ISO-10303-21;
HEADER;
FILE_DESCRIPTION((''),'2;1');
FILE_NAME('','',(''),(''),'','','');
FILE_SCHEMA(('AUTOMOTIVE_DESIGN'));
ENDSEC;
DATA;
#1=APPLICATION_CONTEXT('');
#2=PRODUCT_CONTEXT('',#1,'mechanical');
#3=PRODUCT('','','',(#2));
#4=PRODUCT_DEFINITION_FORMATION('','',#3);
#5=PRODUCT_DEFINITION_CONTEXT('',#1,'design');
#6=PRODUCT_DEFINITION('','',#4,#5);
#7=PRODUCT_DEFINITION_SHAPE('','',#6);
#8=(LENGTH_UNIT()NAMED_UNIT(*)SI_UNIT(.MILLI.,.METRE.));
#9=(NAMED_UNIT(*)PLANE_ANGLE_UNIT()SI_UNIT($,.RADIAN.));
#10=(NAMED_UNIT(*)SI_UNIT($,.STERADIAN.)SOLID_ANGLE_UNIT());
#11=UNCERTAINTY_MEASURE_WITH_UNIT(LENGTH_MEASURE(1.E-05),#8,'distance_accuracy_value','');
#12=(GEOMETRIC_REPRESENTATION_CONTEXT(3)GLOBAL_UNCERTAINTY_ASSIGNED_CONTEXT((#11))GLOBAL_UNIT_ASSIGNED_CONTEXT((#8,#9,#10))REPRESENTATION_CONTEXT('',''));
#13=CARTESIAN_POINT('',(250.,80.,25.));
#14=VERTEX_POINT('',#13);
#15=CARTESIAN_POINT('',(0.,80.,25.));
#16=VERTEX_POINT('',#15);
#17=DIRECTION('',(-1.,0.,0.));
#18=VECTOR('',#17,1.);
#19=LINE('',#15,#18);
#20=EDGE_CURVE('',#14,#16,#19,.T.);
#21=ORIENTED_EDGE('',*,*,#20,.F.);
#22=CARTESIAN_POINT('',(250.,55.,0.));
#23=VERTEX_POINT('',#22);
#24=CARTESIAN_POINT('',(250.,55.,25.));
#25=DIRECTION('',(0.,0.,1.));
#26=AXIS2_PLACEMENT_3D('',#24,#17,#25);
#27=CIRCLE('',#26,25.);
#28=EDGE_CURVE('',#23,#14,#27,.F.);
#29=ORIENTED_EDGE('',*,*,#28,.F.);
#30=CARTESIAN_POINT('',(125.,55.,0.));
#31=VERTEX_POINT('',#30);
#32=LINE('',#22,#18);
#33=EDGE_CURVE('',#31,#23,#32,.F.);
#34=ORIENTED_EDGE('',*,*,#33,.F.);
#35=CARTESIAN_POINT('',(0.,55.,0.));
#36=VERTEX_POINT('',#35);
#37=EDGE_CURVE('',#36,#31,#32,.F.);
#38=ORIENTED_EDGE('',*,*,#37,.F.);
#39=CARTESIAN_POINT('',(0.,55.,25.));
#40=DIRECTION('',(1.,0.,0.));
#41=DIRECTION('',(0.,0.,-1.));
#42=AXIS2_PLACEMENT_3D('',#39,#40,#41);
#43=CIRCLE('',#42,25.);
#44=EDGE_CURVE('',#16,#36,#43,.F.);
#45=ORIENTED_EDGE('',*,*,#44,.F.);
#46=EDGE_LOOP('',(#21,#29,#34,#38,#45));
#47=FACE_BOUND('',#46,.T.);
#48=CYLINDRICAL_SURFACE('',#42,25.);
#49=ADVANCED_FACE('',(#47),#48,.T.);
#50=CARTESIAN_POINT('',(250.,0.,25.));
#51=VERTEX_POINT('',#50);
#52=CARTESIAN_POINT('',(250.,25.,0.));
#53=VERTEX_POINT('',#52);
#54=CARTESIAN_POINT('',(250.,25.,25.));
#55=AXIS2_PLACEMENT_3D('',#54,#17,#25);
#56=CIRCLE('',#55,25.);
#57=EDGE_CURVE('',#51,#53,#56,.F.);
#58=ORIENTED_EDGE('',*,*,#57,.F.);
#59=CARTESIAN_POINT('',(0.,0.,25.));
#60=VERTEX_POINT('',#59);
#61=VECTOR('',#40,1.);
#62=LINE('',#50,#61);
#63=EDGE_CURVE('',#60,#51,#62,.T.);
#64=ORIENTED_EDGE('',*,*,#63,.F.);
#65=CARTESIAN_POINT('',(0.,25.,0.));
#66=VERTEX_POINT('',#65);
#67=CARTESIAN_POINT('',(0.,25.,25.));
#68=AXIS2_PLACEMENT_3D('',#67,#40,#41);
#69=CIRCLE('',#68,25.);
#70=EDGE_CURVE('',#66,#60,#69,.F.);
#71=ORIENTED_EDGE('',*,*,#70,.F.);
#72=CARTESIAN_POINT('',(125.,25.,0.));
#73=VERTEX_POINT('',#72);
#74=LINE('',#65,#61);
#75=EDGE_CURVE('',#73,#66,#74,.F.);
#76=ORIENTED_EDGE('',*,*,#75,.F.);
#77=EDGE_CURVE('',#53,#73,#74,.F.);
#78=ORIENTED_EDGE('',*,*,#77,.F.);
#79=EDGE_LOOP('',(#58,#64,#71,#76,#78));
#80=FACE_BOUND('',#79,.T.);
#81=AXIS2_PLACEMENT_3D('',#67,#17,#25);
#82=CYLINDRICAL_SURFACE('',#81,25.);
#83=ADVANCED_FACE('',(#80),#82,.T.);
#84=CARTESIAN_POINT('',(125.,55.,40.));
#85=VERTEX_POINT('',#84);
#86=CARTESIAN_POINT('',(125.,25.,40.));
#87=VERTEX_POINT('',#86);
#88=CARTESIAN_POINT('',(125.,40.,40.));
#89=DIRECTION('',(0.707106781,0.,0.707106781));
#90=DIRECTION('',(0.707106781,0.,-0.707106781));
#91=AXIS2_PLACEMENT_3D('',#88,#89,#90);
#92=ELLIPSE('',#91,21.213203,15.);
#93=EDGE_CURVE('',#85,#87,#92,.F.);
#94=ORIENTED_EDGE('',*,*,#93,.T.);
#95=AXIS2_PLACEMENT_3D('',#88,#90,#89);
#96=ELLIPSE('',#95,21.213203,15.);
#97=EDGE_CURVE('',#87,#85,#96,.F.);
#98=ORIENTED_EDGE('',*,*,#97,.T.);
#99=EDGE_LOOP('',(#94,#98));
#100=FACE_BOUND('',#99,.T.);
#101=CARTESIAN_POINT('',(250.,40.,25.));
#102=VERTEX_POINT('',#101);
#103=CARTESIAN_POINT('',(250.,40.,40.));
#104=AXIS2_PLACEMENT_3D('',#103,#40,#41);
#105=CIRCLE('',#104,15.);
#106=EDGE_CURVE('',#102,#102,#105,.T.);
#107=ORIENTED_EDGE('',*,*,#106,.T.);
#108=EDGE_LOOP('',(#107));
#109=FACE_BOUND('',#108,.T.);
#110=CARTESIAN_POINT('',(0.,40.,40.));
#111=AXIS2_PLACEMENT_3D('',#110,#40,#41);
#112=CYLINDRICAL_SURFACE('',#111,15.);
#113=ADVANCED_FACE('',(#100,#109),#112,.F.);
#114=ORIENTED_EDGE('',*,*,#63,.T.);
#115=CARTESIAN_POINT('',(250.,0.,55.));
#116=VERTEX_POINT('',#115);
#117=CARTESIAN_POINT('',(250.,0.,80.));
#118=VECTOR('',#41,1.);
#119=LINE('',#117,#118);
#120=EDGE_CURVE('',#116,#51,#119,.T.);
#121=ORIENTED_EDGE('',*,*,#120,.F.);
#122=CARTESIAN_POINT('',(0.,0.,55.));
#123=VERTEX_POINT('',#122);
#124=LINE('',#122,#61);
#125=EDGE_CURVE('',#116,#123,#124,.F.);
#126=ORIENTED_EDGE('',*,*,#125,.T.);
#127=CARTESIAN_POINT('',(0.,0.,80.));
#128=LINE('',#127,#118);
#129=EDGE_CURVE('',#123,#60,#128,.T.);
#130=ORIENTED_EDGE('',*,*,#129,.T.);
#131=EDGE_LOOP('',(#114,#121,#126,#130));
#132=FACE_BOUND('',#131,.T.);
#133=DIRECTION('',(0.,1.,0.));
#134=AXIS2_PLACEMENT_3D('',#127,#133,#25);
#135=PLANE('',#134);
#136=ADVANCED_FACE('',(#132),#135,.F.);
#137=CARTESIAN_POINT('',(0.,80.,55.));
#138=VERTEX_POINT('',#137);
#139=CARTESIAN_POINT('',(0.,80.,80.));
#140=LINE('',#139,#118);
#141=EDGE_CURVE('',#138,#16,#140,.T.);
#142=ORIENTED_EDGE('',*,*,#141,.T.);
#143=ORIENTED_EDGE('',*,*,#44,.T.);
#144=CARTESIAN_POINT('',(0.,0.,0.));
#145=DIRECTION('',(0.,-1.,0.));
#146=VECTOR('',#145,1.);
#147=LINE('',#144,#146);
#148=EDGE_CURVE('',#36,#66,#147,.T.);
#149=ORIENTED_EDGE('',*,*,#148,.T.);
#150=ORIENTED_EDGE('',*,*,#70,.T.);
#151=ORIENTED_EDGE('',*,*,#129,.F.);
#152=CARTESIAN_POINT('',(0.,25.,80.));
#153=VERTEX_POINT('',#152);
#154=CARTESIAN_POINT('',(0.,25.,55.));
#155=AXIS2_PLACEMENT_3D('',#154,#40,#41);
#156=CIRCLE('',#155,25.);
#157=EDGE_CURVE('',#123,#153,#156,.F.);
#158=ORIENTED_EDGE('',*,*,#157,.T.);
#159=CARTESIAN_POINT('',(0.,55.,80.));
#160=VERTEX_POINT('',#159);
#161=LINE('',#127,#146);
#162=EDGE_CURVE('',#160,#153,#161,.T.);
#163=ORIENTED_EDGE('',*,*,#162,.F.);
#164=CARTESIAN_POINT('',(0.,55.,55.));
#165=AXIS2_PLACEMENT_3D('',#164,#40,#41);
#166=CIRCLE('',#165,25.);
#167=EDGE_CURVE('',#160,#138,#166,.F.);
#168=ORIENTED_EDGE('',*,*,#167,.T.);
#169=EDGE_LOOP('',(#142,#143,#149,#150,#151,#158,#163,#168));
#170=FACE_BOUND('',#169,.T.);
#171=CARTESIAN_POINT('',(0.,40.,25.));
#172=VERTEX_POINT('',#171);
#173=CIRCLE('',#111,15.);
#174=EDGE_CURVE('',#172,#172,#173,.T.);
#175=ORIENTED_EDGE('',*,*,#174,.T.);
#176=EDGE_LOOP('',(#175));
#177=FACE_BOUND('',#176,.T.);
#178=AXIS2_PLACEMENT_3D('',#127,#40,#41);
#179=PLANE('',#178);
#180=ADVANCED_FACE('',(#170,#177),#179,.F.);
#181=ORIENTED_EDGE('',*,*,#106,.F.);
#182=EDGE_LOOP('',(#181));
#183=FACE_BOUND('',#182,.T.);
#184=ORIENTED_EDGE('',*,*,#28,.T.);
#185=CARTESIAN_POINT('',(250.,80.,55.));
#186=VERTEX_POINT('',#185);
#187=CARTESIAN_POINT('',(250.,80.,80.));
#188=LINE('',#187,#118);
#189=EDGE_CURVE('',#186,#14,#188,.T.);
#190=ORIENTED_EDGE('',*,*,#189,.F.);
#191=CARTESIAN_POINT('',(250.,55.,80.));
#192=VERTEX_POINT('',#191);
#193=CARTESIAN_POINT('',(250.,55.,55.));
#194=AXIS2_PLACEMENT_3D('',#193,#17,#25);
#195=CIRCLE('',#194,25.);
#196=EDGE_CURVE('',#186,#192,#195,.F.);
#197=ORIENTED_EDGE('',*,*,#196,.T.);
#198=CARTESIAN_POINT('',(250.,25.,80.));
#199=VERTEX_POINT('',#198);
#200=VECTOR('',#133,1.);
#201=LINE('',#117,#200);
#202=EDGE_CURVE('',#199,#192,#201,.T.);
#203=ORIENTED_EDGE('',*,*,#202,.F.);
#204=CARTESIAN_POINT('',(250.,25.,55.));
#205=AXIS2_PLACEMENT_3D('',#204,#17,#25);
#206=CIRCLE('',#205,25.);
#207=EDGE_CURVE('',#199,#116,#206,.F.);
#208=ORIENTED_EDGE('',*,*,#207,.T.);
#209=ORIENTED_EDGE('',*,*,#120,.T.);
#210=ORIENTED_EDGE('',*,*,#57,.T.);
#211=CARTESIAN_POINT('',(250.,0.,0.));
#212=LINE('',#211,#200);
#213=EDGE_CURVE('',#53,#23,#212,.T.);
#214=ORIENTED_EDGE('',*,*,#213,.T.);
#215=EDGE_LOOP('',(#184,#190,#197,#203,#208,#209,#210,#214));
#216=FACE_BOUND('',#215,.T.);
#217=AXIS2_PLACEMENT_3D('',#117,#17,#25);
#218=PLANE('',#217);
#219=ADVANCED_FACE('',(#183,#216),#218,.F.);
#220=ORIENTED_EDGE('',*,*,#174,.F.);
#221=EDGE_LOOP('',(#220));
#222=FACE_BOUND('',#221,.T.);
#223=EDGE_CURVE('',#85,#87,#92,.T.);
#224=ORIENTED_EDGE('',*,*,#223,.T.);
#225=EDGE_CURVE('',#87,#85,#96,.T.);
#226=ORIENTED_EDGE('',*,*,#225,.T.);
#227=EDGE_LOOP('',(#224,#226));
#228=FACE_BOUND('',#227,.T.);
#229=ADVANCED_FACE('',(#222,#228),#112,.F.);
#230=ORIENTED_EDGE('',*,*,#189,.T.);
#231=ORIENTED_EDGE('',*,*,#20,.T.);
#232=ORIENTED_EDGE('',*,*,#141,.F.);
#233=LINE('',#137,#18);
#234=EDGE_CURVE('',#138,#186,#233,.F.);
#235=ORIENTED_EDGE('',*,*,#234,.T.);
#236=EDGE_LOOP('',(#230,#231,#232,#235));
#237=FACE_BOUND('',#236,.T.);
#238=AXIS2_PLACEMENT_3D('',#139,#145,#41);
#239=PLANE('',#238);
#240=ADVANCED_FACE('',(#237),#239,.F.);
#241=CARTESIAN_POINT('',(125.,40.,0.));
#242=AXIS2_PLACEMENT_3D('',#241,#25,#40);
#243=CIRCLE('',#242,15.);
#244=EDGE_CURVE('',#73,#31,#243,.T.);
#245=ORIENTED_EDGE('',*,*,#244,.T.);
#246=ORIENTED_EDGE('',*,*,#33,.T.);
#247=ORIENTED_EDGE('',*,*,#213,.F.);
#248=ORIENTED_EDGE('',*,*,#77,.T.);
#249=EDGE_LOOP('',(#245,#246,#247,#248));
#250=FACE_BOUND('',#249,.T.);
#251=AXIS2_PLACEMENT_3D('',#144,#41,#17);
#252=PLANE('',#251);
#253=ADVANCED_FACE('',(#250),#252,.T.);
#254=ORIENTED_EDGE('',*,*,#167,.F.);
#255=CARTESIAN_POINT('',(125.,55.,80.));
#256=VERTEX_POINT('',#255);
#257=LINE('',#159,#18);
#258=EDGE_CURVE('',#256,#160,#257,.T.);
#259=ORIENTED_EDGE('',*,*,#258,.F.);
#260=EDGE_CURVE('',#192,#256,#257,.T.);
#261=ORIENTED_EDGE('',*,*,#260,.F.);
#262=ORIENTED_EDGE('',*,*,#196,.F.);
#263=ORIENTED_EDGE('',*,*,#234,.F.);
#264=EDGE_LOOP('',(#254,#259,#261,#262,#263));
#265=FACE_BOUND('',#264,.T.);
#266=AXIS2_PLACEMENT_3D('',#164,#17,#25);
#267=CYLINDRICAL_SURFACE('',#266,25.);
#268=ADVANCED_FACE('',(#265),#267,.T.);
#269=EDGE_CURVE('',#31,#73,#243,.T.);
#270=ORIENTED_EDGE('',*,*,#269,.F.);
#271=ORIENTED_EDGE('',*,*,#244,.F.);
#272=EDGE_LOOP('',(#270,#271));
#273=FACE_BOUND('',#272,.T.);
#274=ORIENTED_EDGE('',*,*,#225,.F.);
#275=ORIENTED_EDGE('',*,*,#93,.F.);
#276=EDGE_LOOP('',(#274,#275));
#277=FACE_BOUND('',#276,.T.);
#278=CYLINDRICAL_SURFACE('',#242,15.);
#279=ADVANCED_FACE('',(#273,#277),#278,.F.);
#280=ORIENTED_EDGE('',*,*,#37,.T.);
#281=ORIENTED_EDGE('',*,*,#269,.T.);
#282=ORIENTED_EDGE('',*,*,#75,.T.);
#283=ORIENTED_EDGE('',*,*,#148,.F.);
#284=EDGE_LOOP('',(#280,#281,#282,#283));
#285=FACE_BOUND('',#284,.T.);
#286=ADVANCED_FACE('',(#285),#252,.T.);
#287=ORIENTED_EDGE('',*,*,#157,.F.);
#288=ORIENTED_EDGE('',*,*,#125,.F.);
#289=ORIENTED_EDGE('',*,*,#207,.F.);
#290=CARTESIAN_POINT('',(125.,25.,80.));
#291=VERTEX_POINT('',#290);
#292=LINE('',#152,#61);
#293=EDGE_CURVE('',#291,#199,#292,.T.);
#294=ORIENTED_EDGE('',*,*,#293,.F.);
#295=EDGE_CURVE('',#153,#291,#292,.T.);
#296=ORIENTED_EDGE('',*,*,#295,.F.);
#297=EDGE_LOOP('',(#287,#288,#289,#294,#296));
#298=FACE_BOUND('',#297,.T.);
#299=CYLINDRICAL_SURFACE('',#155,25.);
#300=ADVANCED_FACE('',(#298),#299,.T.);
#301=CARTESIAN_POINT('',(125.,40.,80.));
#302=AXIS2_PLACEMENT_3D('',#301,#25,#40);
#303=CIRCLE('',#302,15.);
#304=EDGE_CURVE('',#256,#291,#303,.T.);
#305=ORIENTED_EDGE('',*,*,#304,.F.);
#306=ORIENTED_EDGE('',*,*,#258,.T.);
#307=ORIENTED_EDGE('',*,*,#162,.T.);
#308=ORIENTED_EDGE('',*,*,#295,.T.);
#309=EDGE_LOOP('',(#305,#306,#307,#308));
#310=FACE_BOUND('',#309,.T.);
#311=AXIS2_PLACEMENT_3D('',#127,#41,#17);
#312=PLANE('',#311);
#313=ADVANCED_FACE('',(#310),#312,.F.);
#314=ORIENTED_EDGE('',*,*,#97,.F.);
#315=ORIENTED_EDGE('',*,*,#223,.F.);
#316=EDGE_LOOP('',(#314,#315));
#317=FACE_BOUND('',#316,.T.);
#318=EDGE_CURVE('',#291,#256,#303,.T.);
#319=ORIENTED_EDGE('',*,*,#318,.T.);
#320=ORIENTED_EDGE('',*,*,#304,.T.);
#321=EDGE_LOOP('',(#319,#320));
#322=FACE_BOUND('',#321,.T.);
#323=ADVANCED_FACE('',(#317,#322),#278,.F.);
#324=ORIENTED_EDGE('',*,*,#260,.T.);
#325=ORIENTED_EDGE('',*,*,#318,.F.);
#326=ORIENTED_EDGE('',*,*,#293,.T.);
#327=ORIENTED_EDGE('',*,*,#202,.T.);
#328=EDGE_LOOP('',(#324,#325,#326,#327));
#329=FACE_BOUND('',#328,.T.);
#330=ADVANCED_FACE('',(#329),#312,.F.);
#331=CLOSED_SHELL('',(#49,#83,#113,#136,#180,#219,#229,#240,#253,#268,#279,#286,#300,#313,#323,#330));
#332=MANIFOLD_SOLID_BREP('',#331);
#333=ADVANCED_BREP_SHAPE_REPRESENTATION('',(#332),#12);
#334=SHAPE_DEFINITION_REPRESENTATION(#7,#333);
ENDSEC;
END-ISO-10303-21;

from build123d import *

# Parameters (mm, degrees)
ESQUISSE1_W             = 250
ESQUISSE1_H             = 80
BOSS_EXTRU_1_DEPTH      = 80
ESQUISSE2_R             = 15
ENL_V_MAT_EXTRU_1_DEPTH = 275.40845468
ESQUISSE3_R             = 15
ENL_V_MAT_EXTRU_2_DEPTH = 80
CONG_1_R                = 25


with BuildPart() as part:
    # Esquisse1 → Boss.-Extru.1 (new body)
    with BuildSketch(Plane.XY):
        with Locations((125, 40)):
            Rectangle(ESQUISSE1_W, ESQUISSE1_H)
    extrude(amount=BOSS_EXTRU_1_DEPTH)

    # Esquisse2 → Enlèv. mat.-Extru.1 (cut, through all)
    with BuildSketch(Plane(origin=(250, 0, 0), x_dir=(0, 0, -1), z_dir=(1, 0, 0))):
        with Locations((-40, 40)):
            Circle(ESQUISSE2_R)
    extrude(amount=-ENL_V_MAT_EXTRU_1_DEPTH, mode=Mode.SUBTRACT)

    # Esquisse3 → Enlèv. mat.-Extru.2 (cut)
    with BuildSketch(Plane.XY.offset(80)):
        with Locations((125, 40)):
            Circle(ESQUISSE3_R)
    extrude(amount=-ENL_V_MAT_EXTRU_2_DEPTH, mode=Mode.SUBTRACT)

    # Congé1
    cong_1_edges = [part.edges().sort_by_distance(p)[0] for p in [
        (125, 80, 80),
        (125, 80, 0),
        (125, 0, 0),
        (125, 0, 80),
    ]]
    fillet(cong_1_edges, radius=CONG_1_R - 0.0001)  # a hair under: the kernel refuses the full size


solid = part.part
